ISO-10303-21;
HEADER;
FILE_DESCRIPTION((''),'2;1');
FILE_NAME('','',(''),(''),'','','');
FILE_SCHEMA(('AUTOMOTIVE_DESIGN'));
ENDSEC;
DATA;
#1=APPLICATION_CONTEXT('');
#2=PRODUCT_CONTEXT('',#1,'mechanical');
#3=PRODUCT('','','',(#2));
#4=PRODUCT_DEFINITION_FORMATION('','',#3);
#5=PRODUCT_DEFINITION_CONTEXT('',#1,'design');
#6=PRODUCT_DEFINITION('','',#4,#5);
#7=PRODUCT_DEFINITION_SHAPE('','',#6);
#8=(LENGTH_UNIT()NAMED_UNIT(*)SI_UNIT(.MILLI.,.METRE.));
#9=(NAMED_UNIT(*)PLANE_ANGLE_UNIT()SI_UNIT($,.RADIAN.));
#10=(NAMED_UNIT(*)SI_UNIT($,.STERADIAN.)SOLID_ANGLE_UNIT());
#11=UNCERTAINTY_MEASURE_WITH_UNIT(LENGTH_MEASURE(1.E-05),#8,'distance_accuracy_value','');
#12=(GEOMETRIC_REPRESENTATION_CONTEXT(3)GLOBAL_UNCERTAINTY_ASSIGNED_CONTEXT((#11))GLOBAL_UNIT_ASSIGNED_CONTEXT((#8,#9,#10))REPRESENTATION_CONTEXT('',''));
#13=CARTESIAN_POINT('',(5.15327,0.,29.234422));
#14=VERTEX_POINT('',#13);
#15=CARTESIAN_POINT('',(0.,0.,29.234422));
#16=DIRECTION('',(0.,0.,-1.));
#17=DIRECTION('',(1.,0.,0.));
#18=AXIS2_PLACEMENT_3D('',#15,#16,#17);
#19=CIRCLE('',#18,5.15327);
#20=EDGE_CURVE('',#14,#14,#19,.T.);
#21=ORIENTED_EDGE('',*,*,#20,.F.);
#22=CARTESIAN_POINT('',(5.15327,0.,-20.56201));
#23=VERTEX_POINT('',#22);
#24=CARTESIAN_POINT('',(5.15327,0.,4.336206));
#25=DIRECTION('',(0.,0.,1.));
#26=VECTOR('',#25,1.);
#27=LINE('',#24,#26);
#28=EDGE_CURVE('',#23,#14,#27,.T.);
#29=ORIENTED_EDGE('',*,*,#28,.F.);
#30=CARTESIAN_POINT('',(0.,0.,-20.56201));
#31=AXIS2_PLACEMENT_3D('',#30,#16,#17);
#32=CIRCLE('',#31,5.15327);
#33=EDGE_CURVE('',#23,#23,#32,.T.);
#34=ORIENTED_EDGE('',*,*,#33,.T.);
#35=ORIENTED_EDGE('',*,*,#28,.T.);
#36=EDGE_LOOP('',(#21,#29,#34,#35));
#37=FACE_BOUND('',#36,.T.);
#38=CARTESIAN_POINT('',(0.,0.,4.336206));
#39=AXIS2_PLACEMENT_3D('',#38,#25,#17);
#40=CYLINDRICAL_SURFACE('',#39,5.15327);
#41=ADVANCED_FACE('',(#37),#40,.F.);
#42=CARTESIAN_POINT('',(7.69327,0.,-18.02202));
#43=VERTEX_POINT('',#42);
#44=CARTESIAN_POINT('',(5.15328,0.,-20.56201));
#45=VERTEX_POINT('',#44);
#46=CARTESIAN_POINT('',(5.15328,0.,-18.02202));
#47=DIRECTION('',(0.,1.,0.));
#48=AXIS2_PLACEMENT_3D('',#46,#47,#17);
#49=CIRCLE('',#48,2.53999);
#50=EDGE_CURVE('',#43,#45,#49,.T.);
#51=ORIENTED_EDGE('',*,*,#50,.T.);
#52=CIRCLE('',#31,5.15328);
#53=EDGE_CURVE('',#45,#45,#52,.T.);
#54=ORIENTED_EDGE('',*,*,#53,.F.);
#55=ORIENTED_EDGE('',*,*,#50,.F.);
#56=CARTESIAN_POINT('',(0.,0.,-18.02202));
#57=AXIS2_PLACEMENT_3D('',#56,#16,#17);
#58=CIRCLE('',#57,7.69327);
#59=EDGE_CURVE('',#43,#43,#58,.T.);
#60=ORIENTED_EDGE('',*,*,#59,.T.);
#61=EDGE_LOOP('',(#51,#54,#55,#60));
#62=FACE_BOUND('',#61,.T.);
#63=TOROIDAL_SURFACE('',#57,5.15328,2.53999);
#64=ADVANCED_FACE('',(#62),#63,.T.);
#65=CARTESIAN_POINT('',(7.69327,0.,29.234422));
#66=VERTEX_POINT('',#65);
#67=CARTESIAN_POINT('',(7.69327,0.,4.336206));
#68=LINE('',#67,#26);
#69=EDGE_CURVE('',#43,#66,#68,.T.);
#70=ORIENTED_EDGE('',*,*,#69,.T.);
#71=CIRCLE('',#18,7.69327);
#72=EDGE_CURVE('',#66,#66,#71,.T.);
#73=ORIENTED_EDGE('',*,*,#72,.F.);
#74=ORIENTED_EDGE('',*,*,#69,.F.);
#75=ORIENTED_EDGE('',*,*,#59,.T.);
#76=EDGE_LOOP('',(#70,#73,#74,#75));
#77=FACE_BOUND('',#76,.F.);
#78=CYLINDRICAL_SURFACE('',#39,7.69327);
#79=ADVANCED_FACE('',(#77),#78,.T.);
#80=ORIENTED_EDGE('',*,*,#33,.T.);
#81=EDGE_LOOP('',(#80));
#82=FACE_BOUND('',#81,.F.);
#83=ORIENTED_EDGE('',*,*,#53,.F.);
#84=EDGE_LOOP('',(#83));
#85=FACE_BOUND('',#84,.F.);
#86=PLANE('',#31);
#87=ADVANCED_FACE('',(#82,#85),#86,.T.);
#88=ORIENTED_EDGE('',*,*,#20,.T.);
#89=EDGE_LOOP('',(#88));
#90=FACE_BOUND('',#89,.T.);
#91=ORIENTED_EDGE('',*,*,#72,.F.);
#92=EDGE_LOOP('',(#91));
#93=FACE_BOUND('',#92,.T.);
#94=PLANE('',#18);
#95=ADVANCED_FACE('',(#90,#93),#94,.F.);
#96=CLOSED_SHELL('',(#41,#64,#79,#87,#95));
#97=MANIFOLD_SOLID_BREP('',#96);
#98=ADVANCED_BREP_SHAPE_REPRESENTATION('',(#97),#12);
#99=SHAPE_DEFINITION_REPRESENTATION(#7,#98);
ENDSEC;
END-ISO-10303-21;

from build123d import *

# Parameters (mm, degrees)
F0_W = 7.6932697557
F0_H = 49.7964322567
F2_T = -2.54
F3_R = 2.53999


# Not quite as in the source:
# - a fillet or chamfer is up to 0.001 mm smaller than in the source, because OpenCascade refuses the exact size


with BuildPart() as f1:
    # F0 (on Front) → F1 (revolve)
    with BuildSketch(Plane.XZ):
        with Locations((3.8466348778, 4.3362062424)):
            Rectangle(F0_W, F0_H)
    revolve(axis=Axis((0, 0, 4.3362062424), (0, 0, -1)))

    # F2
    f2_openings = [f1.faces().sort_by_distance(p)[0] for p in [
        (0, 0, 29.234422),
        (0, 0, -20.56201),
    ]]
    offset(amount=F2_T, openings=f2_openings)

    # F3 (radius 2.54 in the source; OpenCascade refuses exactly that, so slightly less here)
    f3_edges = [f1.edges().sort_by_distance(p)[0] for p in [
        (-7.69327, 0, -20.56201),
    ]]
    fillet(f3_edges, radius=F3_R)


solid = f1.part
